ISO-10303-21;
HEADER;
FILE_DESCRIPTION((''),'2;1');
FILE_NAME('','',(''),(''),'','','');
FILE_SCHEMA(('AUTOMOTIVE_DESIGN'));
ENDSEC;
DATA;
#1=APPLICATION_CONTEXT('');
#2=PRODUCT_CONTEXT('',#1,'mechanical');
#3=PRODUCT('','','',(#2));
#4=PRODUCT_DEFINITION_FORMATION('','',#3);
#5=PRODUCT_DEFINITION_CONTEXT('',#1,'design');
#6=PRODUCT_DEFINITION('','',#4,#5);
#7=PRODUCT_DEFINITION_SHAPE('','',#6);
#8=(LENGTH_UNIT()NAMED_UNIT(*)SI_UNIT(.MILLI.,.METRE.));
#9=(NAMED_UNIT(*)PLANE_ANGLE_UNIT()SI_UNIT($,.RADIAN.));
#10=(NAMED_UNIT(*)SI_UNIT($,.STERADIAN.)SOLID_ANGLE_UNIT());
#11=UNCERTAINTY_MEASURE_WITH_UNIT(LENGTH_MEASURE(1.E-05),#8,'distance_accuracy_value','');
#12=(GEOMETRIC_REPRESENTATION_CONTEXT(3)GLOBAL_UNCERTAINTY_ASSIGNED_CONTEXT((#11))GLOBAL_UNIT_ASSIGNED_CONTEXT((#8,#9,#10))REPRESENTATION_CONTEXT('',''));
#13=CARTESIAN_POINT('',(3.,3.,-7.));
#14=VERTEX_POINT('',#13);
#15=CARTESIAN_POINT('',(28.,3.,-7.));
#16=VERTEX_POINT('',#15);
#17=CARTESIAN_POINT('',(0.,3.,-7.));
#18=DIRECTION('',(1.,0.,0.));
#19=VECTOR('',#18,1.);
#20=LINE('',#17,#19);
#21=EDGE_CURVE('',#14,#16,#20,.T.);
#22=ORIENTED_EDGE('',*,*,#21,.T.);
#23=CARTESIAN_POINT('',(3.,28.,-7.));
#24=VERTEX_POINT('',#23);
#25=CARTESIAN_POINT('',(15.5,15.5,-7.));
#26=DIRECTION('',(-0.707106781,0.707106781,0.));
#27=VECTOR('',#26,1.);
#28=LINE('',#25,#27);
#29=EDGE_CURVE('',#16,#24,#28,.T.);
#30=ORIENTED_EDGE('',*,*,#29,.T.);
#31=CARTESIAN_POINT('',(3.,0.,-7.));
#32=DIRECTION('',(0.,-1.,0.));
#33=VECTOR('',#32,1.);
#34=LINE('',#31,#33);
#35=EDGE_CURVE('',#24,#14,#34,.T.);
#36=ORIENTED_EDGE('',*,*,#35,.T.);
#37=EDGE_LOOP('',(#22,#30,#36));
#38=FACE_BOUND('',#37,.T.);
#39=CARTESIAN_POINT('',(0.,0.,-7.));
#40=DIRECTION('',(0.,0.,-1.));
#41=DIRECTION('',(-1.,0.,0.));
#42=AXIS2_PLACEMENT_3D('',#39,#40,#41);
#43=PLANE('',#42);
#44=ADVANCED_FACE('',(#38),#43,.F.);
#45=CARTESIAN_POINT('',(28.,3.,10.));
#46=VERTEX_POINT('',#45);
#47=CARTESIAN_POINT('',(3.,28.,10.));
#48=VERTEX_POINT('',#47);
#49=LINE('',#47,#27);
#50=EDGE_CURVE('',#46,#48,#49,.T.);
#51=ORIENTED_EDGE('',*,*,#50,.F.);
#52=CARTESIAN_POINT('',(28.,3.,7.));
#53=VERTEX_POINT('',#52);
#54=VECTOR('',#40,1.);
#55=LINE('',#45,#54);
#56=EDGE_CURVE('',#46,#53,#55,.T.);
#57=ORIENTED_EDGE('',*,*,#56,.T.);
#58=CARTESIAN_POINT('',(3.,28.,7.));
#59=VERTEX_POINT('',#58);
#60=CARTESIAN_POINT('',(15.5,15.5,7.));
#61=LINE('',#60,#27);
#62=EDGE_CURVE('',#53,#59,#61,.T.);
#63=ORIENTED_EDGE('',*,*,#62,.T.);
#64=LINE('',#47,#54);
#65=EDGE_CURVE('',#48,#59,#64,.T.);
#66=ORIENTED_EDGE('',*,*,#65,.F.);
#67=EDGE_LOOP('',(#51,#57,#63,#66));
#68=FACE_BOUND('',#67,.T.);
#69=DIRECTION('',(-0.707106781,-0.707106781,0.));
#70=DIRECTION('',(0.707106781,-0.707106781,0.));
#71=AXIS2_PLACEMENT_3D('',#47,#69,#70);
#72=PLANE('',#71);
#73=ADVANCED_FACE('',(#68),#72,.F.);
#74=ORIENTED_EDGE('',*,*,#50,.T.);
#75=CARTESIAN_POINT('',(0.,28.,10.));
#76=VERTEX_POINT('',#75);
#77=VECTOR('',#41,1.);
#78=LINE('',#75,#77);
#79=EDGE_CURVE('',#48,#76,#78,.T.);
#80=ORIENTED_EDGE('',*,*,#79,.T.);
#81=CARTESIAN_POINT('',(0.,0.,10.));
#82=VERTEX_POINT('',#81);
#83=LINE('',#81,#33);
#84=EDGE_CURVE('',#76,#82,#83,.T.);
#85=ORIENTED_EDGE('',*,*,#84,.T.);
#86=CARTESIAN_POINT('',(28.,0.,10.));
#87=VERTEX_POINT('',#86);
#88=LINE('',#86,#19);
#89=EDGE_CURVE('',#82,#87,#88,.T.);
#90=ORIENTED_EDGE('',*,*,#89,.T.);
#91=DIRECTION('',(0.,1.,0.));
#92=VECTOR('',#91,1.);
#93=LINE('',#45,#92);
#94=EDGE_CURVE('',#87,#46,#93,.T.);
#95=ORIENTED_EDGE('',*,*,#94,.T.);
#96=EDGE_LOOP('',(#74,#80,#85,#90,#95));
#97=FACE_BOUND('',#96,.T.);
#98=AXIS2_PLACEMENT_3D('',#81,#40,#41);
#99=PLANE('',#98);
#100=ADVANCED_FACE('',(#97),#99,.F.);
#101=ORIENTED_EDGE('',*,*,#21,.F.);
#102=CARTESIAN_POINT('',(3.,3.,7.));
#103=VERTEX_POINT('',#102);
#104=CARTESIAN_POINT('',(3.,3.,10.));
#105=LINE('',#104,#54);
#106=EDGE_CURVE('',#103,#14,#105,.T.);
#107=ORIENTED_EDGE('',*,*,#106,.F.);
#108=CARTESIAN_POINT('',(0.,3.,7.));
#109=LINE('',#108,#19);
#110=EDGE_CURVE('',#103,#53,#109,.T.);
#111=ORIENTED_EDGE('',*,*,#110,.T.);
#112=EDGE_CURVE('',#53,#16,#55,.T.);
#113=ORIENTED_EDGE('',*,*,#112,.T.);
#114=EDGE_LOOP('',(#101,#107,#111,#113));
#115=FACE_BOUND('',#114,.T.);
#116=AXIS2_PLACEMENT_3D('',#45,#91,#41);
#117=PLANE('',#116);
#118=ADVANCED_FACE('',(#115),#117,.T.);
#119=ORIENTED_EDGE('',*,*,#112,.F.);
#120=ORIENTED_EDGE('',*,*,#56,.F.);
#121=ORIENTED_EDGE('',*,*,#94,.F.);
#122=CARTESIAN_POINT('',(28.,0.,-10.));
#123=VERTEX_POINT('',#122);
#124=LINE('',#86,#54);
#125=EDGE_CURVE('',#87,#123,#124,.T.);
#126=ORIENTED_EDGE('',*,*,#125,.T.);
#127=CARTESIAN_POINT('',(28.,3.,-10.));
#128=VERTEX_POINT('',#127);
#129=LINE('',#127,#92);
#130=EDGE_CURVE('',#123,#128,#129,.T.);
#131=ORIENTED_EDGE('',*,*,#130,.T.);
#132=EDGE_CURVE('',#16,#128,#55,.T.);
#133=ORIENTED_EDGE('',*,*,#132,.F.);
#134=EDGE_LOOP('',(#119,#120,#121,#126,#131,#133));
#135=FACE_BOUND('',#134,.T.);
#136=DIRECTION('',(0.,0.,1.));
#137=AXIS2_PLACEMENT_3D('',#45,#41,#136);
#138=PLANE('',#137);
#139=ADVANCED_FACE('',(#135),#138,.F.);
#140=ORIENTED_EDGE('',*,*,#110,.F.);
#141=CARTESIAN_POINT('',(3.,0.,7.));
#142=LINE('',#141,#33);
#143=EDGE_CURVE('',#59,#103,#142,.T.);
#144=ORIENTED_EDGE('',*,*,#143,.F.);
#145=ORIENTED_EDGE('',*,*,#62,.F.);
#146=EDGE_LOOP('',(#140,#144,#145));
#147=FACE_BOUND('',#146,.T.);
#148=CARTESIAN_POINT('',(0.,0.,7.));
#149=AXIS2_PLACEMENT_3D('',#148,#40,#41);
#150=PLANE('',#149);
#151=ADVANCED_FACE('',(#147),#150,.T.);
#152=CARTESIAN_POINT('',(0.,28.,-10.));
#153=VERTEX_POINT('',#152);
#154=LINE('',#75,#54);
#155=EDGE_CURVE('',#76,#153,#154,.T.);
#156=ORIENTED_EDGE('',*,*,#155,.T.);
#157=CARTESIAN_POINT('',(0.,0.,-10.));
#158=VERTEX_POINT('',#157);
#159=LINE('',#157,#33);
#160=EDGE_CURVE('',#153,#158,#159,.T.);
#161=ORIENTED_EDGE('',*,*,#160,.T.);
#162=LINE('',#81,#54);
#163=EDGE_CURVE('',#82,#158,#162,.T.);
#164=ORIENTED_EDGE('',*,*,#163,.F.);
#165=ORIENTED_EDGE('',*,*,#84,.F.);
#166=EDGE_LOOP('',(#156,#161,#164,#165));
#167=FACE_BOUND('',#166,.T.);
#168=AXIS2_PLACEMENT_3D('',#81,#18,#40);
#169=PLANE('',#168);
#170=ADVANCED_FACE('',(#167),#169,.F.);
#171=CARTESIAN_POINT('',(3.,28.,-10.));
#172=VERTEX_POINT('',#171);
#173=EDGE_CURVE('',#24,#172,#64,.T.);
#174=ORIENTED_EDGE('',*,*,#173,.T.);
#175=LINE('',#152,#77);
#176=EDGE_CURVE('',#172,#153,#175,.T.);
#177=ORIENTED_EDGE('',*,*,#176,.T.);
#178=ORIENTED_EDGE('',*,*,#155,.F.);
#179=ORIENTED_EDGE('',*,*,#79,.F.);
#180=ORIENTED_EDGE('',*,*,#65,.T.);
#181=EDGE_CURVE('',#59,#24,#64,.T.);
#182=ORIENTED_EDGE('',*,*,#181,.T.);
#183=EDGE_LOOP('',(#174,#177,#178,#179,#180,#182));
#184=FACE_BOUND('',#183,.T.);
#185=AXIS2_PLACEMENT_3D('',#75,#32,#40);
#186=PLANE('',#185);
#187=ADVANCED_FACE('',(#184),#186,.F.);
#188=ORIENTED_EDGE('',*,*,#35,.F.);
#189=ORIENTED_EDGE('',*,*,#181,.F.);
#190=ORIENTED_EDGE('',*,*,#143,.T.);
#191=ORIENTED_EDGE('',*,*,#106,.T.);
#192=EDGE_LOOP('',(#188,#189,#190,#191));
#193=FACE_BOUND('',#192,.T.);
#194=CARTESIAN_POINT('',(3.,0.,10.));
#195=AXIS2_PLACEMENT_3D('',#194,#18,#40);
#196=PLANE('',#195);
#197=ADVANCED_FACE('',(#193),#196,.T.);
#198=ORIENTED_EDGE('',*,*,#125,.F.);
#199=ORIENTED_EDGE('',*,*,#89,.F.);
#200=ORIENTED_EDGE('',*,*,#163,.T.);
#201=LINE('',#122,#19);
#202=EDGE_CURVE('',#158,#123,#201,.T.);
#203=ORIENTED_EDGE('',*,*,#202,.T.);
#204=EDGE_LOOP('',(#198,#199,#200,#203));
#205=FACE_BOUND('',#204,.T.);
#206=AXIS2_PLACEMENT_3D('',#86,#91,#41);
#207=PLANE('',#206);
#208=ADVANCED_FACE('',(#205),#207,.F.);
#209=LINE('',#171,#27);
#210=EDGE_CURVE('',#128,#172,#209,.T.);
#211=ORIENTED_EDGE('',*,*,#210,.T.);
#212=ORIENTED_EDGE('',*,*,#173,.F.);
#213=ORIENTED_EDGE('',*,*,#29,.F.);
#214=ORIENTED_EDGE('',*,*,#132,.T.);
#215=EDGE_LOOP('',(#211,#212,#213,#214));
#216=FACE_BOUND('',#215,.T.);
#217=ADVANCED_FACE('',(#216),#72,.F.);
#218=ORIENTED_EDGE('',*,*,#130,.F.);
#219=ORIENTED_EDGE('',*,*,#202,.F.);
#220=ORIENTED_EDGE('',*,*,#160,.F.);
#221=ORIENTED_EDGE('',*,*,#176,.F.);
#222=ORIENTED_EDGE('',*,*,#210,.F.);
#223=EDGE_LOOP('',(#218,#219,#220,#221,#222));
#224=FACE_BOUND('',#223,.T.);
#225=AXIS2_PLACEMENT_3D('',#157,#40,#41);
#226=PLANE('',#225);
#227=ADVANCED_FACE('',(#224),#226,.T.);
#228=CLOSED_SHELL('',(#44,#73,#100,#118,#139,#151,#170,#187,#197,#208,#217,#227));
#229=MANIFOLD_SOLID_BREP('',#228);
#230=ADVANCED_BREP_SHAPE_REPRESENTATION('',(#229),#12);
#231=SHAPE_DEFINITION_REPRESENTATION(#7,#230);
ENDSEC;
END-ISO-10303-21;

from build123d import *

# Parameters (mm, degrees)
BODY_DEPTH      = 10
SHELL_START     = 3
SHELL_OUTLINE_W = 26
SHELL_OUTLINE_H = 14
SHELL_DEPTH     = 25


# Read off the part's stored shape, not the designer's step: Shell
with BuildPart() as part:
    # Sketch1 → Body (new, symmetric)
    with BuildSketch(Plane.XY):
        Polygon((28, 0), (0, 0), (0, 28), (3, 28), (28, 3), align=None)
    extrude(amount=BODY_DEPTH, both=True)

    # Shell outline → Shell (cut)
    with BuildSketch(Plane.YZ.offset(SHELL_START)):
        with Locations((16, 0)):
            Rectangle(SHELL_OUTLINE_W, SHELL_OUTLINE_H)
    extrude(amount=SHELL_DEPTH, mode=Mode.SUBTRACT)


solid = part.part
